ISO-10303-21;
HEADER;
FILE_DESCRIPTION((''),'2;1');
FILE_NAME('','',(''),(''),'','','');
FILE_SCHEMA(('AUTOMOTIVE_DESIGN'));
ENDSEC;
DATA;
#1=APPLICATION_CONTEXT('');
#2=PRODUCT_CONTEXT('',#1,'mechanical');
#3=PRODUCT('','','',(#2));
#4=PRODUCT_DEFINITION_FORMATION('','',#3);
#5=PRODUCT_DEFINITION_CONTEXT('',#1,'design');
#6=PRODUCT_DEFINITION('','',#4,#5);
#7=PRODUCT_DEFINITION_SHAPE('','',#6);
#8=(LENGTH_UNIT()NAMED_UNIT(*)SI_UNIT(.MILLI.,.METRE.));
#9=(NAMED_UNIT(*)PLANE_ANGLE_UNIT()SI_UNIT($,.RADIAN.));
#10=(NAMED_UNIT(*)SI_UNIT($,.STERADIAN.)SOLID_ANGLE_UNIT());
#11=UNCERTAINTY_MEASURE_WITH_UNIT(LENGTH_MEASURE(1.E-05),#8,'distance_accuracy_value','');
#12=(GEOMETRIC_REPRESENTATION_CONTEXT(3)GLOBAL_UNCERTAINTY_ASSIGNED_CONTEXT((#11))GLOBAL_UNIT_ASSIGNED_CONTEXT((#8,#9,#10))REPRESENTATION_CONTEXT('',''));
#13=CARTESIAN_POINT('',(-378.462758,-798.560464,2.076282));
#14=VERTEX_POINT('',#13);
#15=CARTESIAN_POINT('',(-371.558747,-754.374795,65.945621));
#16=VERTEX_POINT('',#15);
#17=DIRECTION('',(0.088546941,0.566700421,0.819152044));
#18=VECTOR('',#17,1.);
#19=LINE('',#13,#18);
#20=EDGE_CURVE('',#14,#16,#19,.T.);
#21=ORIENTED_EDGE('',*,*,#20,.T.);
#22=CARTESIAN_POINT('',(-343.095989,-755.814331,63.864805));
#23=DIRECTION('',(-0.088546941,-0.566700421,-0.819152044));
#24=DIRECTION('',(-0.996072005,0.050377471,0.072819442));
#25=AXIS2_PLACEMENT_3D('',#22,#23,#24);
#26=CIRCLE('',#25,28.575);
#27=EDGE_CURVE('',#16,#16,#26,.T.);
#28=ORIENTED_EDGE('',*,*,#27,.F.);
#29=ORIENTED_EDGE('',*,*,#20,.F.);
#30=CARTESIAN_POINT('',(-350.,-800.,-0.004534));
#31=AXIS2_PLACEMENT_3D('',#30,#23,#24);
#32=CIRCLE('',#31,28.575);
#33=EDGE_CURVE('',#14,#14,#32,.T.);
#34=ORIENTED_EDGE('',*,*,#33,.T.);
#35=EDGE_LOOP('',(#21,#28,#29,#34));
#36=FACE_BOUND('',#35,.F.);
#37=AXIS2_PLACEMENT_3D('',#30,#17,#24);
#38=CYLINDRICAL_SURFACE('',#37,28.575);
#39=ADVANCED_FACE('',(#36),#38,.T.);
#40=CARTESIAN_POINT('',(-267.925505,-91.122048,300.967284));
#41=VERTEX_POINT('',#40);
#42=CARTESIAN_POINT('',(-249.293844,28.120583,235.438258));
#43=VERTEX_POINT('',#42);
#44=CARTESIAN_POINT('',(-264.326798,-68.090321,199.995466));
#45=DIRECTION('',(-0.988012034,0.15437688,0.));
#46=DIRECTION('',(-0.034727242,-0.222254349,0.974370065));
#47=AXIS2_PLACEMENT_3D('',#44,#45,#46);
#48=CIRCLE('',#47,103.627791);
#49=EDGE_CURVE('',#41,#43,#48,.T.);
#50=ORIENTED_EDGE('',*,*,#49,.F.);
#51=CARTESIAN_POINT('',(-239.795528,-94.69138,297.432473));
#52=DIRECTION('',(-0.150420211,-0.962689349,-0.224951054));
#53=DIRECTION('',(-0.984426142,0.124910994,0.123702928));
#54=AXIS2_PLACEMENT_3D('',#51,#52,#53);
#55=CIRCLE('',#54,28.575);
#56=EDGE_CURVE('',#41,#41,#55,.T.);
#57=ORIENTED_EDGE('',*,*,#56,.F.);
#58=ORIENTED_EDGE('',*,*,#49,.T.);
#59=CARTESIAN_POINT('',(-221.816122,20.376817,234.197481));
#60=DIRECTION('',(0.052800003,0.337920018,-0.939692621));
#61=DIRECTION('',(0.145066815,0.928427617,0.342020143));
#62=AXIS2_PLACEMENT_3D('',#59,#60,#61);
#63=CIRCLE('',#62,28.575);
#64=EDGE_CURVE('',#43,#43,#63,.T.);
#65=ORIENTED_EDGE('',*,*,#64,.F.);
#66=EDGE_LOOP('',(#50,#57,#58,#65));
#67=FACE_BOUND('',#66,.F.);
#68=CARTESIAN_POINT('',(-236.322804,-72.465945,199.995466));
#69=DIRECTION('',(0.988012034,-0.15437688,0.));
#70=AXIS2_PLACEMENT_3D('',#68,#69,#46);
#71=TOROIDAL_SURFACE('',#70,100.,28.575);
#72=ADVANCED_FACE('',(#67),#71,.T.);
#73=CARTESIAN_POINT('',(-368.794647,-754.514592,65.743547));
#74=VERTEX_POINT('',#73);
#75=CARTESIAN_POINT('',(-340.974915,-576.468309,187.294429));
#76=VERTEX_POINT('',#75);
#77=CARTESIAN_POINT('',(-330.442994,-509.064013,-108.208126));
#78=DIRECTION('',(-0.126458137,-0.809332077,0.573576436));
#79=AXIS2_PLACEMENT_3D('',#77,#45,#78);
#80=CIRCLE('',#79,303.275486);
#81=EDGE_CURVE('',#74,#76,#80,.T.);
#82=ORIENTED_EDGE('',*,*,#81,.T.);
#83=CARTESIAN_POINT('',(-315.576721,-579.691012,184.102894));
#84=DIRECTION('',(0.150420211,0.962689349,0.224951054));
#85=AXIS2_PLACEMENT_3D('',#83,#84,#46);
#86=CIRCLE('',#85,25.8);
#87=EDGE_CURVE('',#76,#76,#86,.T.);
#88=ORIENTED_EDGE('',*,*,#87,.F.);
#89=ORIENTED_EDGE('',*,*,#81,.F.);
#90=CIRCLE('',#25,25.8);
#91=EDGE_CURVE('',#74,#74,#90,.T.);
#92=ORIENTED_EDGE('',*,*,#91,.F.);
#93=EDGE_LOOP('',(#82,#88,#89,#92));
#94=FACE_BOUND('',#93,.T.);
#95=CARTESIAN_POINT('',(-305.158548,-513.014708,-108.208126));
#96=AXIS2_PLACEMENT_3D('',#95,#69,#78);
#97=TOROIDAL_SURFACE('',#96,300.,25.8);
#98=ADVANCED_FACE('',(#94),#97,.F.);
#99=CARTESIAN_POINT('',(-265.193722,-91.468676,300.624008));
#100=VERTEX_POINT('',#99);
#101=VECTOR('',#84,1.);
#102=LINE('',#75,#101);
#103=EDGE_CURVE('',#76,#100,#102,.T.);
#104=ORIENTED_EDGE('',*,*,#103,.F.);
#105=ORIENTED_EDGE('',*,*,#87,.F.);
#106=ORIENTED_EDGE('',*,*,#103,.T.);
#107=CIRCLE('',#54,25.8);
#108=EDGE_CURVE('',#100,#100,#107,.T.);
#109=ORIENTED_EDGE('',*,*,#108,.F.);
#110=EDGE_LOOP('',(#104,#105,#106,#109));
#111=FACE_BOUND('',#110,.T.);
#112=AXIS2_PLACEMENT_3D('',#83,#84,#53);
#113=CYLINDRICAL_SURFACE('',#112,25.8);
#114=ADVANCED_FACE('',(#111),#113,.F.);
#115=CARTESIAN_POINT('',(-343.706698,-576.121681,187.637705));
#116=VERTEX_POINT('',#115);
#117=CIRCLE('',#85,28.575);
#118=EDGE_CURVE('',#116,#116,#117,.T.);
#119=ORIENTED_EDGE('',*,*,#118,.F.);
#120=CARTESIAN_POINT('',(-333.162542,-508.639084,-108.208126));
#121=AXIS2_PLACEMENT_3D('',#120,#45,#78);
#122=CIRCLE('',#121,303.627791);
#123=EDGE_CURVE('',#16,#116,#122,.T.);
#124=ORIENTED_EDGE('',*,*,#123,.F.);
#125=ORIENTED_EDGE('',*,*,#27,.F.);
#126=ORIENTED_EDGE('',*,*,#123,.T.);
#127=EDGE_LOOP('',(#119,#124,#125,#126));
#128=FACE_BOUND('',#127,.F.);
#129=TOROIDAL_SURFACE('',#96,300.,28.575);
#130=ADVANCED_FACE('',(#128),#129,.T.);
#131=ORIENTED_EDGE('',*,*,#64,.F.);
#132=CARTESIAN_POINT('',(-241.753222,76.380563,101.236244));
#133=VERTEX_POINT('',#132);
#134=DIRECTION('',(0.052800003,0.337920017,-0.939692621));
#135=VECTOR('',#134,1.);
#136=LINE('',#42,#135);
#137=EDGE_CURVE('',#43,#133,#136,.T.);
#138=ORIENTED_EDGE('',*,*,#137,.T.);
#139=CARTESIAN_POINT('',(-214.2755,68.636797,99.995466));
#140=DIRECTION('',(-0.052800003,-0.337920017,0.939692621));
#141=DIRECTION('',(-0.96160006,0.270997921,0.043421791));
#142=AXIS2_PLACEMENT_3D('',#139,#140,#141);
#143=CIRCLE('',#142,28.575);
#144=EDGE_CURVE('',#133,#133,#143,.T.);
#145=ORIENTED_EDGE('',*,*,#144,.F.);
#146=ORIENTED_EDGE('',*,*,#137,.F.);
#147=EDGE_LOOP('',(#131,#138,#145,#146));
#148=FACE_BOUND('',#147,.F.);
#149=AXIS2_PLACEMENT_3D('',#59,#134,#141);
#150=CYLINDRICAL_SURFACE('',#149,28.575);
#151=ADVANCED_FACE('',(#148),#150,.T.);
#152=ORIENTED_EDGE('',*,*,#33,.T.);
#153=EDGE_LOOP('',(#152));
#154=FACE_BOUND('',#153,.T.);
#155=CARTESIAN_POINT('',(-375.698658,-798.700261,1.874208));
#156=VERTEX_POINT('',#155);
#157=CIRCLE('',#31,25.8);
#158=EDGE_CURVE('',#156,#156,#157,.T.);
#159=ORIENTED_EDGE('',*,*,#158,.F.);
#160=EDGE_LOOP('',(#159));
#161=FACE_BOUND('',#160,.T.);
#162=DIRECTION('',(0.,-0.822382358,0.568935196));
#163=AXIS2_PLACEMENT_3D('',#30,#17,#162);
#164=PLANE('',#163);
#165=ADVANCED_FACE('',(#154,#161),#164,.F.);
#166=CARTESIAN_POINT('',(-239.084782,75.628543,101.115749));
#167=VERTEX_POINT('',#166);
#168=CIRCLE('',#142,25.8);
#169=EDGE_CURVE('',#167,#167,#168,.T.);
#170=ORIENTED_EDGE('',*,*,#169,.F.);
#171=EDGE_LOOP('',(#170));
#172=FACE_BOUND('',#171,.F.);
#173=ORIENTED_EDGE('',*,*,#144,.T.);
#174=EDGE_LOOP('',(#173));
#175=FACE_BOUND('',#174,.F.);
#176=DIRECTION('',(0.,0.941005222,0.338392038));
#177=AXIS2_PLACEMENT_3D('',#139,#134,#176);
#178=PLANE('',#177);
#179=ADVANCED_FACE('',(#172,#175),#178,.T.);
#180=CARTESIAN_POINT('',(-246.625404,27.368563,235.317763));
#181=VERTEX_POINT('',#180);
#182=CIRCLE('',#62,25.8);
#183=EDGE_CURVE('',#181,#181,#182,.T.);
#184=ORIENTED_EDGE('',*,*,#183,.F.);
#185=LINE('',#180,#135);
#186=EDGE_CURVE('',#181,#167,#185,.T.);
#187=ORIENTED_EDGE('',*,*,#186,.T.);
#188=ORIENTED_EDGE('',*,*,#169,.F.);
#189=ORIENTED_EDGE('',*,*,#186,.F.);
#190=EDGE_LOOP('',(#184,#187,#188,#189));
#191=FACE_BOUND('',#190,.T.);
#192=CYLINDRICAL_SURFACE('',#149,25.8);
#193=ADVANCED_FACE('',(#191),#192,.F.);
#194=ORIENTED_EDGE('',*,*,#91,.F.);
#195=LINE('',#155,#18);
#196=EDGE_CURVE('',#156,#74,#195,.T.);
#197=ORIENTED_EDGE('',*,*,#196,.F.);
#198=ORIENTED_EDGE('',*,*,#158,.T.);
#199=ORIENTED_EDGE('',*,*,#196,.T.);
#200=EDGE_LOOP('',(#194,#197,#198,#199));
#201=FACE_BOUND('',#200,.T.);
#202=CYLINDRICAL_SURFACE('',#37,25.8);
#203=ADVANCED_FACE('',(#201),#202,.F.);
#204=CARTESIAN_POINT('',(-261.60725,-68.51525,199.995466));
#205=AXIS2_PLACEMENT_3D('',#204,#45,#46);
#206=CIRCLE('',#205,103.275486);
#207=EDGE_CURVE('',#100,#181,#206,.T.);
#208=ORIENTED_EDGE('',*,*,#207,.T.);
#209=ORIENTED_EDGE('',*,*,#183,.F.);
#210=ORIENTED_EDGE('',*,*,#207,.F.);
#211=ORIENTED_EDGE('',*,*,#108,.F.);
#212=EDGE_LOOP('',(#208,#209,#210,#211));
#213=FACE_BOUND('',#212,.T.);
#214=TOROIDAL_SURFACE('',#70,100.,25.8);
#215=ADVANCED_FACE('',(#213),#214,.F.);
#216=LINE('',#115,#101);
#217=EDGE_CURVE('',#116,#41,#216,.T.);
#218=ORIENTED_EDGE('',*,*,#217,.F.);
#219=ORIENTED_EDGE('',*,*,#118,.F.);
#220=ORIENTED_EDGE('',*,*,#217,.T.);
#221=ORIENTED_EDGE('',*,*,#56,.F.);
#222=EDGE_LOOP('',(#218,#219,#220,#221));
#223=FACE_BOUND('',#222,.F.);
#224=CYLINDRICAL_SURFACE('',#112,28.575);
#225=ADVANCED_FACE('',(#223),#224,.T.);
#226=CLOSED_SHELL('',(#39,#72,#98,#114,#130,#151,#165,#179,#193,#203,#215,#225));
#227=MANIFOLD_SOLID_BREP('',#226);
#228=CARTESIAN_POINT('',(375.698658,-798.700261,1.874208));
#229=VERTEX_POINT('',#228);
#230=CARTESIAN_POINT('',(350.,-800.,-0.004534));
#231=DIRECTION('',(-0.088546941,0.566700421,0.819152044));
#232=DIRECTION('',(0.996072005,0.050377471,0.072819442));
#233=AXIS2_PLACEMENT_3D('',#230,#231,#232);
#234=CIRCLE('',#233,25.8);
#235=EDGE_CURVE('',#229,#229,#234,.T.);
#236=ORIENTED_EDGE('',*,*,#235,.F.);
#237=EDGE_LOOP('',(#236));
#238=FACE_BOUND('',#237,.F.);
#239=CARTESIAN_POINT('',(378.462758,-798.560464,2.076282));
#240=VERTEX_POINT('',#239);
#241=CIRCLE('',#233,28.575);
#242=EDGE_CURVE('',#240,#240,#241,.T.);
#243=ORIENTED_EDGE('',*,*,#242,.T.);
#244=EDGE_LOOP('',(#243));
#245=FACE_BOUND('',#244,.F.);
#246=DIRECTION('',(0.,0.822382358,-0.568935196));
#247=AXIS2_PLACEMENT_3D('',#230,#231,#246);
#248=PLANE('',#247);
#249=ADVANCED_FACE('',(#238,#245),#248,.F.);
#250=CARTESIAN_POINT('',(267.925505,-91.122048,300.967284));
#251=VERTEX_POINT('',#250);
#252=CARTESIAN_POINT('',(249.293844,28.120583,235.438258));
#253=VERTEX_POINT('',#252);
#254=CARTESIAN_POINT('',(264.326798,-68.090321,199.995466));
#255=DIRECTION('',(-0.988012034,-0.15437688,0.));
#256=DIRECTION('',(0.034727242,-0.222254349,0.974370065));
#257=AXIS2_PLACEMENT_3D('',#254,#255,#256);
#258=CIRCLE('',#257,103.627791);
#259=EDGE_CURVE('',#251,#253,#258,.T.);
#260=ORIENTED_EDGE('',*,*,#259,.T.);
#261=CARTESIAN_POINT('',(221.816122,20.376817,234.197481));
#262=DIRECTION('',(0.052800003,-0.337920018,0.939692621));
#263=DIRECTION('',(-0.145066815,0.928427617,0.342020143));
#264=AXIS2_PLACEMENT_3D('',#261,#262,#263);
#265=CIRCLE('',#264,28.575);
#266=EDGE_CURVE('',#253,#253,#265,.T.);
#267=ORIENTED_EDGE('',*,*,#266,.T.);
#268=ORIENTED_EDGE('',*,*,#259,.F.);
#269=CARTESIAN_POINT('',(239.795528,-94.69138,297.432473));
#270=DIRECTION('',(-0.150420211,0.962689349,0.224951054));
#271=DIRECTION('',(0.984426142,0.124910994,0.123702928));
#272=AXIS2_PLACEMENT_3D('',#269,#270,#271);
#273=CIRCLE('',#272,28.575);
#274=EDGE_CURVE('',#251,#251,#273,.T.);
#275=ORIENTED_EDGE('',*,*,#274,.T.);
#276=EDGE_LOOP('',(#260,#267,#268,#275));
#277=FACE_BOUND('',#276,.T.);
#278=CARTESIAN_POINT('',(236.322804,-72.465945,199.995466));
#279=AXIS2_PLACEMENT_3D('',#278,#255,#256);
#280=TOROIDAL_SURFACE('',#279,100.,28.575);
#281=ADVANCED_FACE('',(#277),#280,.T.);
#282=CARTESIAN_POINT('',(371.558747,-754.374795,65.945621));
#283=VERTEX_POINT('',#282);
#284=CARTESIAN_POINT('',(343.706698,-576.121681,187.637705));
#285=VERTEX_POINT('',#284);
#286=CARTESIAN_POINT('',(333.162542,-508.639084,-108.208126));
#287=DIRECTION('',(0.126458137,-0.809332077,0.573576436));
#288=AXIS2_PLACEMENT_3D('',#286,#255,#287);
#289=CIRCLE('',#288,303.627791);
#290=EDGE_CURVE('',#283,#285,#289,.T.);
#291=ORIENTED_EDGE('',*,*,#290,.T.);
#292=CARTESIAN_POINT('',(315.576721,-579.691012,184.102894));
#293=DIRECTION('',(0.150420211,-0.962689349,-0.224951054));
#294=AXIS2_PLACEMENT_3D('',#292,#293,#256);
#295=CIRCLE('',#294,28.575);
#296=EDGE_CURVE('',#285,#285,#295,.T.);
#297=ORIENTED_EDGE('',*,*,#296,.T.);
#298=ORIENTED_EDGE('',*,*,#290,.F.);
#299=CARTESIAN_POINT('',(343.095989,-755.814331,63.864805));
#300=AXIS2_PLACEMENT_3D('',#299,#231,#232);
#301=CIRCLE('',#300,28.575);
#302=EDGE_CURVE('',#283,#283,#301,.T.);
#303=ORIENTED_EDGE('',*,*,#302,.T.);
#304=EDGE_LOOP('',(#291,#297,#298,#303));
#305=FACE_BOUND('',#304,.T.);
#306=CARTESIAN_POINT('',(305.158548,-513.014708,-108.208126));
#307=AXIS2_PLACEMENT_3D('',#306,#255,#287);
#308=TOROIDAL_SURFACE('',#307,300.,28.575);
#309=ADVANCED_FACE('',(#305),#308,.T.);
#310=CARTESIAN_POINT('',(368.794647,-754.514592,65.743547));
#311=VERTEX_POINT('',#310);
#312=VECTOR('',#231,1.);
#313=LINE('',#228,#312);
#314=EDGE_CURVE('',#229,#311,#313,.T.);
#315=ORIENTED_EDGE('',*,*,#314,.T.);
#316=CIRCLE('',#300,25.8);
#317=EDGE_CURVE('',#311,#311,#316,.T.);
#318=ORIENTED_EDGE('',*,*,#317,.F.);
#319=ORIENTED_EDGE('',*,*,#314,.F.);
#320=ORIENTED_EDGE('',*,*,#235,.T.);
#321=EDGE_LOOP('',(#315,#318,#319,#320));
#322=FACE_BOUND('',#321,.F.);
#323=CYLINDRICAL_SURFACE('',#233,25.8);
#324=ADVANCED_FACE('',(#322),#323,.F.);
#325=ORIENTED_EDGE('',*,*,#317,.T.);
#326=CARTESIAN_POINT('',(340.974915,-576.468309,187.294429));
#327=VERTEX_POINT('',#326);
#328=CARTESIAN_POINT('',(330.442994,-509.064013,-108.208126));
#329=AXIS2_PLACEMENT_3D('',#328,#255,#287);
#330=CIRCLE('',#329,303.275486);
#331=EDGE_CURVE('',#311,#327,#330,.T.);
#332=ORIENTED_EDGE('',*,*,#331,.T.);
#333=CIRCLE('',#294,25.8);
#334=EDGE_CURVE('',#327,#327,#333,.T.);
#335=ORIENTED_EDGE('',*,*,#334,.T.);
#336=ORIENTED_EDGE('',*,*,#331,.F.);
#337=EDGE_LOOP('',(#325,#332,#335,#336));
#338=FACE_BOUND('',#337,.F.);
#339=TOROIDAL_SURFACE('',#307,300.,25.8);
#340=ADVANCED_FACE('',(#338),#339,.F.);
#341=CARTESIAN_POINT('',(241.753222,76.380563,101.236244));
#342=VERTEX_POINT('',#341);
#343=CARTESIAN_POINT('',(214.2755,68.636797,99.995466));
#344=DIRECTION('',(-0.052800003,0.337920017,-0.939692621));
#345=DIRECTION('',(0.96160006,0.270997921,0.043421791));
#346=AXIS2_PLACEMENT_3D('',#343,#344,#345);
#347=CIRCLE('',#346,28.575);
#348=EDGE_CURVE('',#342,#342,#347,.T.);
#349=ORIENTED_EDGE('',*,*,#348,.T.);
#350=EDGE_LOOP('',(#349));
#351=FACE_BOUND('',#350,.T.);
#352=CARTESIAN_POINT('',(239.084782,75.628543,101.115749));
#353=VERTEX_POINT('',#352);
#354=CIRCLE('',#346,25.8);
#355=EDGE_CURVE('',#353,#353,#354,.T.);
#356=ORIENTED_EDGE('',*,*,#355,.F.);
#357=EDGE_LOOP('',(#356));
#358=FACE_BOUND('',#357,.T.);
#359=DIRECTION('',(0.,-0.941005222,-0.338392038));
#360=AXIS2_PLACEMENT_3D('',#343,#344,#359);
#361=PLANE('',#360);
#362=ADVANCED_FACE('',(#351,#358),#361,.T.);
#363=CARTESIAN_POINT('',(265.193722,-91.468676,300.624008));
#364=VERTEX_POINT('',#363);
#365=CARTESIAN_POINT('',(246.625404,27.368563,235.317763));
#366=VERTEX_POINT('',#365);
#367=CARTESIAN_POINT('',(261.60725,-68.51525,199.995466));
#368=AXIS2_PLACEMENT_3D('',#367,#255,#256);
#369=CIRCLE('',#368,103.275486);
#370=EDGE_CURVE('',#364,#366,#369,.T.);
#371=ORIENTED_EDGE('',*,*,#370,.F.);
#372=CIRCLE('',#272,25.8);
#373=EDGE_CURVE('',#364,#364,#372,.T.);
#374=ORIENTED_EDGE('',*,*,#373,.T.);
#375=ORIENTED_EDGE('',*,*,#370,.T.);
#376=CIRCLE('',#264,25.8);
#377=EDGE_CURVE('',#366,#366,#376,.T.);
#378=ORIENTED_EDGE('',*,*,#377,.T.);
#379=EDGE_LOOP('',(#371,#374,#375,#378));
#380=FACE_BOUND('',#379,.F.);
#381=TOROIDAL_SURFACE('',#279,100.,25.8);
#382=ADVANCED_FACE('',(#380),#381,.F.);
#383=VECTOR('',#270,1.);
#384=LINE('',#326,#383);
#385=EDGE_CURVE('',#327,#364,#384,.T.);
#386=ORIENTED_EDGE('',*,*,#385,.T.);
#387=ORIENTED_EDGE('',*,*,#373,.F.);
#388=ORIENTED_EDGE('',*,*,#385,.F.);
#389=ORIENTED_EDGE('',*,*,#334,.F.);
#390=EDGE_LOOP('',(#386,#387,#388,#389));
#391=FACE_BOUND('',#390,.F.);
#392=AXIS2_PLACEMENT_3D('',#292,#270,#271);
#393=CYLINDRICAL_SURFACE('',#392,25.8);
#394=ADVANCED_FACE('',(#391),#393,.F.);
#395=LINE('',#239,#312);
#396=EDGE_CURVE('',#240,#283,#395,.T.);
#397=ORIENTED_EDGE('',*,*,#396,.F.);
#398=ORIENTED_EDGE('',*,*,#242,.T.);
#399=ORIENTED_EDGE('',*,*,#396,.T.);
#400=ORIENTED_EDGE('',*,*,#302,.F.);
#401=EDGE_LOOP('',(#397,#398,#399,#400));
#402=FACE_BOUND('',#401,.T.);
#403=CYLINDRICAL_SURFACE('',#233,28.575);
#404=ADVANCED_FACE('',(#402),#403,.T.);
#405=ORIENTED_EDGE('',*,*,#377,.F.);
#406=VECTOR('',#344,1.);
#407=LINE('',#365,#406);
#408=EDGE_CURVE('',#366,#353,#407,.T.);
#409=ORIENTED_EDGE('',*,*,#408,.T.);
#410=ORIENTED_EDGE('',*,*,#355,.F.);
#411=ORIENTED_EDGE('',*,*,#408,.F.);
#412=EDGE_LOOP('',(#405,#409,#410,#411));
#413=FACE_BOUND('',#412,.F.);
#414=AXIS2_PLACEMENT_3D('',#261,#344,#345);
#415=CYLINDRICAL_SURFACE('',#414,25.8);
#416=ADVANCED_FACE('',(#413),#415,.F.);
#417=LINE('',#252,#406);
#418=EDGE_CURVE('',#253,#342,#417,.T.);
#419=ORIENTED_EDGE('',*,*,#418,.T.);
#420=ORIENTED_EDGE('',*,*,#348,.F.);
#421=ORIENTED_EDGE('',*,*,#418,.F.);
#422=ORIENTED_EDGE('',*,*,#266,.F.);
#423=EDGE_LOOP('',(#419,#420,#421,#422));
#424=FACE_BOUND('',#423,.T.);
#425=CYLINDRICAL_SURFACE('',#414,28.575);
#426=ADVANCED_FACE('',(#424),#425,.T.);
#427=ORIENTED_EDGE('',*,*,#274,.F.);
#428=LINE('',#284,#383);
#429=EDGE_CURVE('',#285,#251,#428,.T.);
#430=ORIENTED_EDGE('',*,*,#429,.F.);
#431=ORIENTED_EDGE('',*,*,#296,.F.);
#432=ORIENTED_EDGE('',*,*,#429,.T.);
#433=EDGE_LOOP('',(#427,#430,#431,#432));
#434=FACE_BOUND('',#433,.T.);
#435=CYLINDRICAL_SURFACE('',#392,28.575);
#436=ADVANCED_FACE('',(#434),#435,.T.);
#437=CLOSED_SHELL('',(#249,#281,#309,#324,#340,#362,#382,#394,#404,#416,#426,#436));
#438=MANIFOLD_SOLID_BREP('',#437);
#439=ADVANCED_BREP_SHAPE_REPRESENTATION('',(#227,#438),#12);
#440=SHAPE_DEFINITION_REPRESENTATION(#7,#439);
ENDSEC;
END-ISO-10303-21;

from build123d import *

# Parameters (mm, degrees)
F6_R   = 28.575
F6_R_2 = 25.8


# Not quite as in the source:
# - a pattern or mirror of a feature is missing from the dataset's text; its kind, count and spacing are read off the source's solid


with BuildPart() as f7:
    # F7: sweep along a path in F4
    with BuildLine(Plane(origin=(219.6377502383, 34.3183984747, 0), x_dir=(0.1543768803, -0.9880120338, 0), z_dir=(-0.9880120338, -0.1543768803, 0))) as f7_path:
        Line((844.4415350966, -0.0045336783), (799.7197425418, 63.8648052169))
        ThreePointArc((799.7197425418, 63.8648052169), (721.7320002963, 140.5031460781), (621.4594455582, 184.1028937472))
        Line((621.4594455582, 184.1028937472), (130.575108047, 297.4324728002))
        ThreePointArc((130.575108047, 297.4324728002), (60.3641265867, 287.8771775879), (14.1107405341, 234.1974806543))
        Line((14.1107405341, 234.1974806543), (-34.7347980616, 99.9954663217))
    # F6 (on line) → F7 (sweep)
    with BuildSketch(Plane(origin=(42.8881960501, -274.4844547207, -396.7607817515), x_dir=(0.9960720051, 0.0503774711, 0.072819442), z_dir=(-0.0885469408, 0.5667004214, 0.8191520443))):
        with Locations((308.3228947197, -657.9033070538)):
            Circle(F6_R)
        with Locations((308.3228947197, -657.9033070538)):
            Circle(F6_R_2, mode=Mode.SUBTRACT)
    sweep(path=f7_path.line)


with BuildPart() as f7_copies_1:
    # F7_copies: instance of F7
    add(f7.part.mirror(Plane(origin=(0, 0, 0), x_dir=(0, 0, -1), z_dir=(-1, 0, 0))))


solid = Compound([f7.part, f7_copies_1.part])
